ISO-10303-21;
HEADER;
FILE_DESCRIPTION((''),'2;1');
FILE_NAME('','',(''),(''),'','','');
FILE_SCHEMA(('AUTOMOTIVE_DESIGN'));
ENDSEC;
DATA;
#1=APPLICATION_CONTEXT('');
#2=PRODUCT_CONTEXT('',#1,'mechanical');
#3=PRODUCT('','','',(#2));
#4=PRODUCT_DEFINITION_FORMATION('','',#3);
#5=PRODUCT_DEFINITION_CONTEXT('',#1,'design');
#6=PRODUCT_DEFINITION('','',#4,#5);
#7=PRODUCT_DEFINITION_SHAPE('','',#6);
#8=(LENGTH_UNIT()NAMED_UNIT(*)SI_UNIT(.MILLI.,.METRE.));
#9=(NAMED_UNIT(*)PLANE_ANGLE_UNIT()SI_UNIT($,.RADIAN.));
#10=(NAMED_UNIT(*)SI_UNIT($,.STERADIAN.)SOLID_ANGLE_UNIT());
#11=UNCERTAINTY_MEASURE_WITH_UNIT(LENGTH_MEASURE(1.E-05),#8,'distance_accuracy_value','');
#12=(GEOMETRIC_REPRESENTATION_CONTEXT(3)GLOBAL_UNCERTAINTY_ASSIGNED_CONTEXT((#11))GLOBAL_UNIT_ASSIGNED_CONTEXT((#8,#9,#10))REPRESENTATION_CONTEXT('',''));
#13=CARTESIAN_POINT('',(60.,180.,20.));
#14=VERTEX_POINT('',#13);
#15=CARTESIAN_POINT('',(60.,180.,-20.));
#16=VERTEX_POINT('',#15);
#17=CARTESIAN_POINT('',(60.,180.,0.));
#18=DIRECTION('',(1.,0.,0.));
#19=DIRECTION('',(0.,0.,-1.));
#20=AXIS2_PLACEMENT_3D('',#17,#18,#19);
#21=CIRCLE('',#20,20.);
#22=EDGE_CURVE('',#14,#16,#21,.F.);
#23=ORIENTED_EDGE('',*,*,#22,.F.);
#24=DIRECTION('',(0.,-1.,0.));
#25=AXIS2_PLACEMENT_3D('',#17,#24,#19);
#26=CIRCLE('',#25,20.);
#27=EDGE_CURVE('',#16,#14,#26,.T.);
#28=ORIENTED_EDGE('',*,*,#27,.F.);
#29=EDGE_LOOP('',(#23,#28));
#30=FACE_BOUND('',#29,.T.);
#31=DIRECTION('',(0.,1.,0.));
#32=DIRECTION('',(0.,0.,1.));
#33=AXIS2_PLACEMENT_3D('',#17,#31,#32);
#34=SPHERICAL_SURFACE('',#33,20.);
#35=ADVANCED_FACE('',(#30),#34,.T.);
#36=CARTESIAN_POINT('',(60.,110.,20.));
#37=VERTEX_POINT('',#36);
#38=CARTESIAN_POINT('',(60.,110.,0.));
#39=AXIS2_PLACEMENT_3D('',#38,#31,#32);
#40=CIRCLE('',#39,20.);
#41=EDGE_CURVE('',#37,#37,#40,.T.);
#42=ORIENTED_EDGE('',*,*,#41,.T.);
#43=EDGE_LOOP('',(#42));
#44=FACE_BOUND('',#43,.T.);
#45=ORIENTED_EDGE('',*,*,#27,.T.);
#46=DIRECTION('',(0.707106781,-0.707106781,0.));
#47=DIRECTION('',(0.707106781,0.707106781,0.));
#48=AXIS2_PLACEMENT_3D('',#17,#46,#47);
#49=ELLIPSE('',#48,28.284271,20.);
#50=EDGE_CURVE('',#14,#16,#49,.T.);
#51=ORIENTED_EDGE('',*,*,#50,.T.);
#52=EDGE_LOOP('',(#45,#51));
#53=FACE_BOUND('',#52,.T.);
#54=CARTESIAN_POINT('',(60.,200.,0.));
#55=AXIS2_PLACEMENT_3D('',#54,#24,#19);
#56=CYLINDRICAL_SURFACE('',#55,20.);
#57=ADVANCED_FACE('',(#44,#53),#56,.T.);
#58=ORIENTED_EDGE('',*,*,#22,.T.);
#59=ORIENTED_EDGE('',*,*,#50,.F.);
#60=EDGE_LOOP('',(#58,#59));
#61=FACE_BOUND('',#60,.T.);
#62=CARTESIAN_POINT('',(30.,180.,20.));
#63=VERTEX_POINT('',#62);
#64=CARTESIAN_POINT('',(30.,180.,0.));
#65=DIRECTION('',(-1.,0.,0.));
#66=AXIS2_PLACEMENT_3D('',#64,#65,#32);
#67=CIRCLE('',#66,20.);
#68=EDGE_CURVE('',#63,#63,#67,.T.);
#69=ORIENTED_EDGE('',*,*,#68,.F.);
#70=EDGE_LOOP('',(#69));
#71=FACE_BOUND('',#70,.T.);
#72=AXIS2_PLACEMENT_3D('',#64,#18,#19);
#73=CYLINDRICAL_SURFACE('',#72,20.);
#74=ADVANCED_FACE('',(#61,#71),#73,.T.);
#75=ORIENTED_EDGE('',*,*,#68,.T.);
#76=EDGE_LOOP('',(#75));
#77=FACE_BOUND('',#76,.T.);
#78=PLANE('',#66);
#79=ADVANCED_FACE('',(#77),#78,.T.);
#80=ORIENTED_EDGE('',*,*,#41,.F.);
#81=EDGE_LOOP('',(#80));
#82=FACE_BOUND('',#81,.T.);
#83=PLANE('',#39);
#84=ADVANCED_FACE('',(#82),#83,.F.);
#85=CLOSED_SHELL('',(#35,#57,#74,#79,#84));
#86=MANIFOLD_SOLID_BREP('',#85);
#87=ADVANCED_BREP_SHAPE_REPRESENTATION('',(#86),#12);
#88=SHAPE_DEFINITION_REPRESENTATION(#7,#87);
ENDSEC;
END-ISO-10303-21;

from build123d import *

# Parameters (mm, degrees)
BOSS_EXTRUDE1_DEPTH = 90
FILLET1_R           = 20
SKETCH3_R           = 20
BOSS_EXTRUDE2_DEPTH = 30
BOSS_EXTRUDE3_DEPTH = 70


with BuildPart() as part:
    # Sketch1 → Boss-Extrude1 (new body)
    with BuildSketch(Plane(origin=(0, 110, 0), x_dir=(1, 0, 0), z_dir=(0, 1, 0))):
        with BuildLine():
            Line((60, 20), (60, -20))
            ThreePointArc((60, -20), (80, 0), (60, 20))
        make_face()
    extrude(amount=BOSS_EXTRUDE1_DEPTH)

    # Fillet1
    fillet1_edges = [part.edges().sort_by_distance(p)[0] for p in [
        (80, 200, 0),
    ]]
    fillet(fillet1_edges, radius=FILLET1_R - 0.0001)  # a hair under: the kernel refuses the full size

    # Sketch3 → Boss-Extrude2 (add)
    with BuildSketch(Plane.ZY.offset(-60)):
        with Locations((0, 180)):
            Circle(SKETCH3_R)
    extrude(amount=BOSS_EXTRUDE2_DEPTH)

    # Sketch4 → Boss-Extrude3 (add)
    with BuildSketch(Plane(origin=(0, 110, 0), x_dir=(1, 0, 0), z_dir=(0, 1, 0))):
        with BuildLine():
            Line((60, 20), (60, -20))
            ThreePointArc((60, -20), (40, 0), (60, 20))
        make_face()
    extrude(amount=BOSS_EXTRUDE3_DEPTH)


solid = part.part
